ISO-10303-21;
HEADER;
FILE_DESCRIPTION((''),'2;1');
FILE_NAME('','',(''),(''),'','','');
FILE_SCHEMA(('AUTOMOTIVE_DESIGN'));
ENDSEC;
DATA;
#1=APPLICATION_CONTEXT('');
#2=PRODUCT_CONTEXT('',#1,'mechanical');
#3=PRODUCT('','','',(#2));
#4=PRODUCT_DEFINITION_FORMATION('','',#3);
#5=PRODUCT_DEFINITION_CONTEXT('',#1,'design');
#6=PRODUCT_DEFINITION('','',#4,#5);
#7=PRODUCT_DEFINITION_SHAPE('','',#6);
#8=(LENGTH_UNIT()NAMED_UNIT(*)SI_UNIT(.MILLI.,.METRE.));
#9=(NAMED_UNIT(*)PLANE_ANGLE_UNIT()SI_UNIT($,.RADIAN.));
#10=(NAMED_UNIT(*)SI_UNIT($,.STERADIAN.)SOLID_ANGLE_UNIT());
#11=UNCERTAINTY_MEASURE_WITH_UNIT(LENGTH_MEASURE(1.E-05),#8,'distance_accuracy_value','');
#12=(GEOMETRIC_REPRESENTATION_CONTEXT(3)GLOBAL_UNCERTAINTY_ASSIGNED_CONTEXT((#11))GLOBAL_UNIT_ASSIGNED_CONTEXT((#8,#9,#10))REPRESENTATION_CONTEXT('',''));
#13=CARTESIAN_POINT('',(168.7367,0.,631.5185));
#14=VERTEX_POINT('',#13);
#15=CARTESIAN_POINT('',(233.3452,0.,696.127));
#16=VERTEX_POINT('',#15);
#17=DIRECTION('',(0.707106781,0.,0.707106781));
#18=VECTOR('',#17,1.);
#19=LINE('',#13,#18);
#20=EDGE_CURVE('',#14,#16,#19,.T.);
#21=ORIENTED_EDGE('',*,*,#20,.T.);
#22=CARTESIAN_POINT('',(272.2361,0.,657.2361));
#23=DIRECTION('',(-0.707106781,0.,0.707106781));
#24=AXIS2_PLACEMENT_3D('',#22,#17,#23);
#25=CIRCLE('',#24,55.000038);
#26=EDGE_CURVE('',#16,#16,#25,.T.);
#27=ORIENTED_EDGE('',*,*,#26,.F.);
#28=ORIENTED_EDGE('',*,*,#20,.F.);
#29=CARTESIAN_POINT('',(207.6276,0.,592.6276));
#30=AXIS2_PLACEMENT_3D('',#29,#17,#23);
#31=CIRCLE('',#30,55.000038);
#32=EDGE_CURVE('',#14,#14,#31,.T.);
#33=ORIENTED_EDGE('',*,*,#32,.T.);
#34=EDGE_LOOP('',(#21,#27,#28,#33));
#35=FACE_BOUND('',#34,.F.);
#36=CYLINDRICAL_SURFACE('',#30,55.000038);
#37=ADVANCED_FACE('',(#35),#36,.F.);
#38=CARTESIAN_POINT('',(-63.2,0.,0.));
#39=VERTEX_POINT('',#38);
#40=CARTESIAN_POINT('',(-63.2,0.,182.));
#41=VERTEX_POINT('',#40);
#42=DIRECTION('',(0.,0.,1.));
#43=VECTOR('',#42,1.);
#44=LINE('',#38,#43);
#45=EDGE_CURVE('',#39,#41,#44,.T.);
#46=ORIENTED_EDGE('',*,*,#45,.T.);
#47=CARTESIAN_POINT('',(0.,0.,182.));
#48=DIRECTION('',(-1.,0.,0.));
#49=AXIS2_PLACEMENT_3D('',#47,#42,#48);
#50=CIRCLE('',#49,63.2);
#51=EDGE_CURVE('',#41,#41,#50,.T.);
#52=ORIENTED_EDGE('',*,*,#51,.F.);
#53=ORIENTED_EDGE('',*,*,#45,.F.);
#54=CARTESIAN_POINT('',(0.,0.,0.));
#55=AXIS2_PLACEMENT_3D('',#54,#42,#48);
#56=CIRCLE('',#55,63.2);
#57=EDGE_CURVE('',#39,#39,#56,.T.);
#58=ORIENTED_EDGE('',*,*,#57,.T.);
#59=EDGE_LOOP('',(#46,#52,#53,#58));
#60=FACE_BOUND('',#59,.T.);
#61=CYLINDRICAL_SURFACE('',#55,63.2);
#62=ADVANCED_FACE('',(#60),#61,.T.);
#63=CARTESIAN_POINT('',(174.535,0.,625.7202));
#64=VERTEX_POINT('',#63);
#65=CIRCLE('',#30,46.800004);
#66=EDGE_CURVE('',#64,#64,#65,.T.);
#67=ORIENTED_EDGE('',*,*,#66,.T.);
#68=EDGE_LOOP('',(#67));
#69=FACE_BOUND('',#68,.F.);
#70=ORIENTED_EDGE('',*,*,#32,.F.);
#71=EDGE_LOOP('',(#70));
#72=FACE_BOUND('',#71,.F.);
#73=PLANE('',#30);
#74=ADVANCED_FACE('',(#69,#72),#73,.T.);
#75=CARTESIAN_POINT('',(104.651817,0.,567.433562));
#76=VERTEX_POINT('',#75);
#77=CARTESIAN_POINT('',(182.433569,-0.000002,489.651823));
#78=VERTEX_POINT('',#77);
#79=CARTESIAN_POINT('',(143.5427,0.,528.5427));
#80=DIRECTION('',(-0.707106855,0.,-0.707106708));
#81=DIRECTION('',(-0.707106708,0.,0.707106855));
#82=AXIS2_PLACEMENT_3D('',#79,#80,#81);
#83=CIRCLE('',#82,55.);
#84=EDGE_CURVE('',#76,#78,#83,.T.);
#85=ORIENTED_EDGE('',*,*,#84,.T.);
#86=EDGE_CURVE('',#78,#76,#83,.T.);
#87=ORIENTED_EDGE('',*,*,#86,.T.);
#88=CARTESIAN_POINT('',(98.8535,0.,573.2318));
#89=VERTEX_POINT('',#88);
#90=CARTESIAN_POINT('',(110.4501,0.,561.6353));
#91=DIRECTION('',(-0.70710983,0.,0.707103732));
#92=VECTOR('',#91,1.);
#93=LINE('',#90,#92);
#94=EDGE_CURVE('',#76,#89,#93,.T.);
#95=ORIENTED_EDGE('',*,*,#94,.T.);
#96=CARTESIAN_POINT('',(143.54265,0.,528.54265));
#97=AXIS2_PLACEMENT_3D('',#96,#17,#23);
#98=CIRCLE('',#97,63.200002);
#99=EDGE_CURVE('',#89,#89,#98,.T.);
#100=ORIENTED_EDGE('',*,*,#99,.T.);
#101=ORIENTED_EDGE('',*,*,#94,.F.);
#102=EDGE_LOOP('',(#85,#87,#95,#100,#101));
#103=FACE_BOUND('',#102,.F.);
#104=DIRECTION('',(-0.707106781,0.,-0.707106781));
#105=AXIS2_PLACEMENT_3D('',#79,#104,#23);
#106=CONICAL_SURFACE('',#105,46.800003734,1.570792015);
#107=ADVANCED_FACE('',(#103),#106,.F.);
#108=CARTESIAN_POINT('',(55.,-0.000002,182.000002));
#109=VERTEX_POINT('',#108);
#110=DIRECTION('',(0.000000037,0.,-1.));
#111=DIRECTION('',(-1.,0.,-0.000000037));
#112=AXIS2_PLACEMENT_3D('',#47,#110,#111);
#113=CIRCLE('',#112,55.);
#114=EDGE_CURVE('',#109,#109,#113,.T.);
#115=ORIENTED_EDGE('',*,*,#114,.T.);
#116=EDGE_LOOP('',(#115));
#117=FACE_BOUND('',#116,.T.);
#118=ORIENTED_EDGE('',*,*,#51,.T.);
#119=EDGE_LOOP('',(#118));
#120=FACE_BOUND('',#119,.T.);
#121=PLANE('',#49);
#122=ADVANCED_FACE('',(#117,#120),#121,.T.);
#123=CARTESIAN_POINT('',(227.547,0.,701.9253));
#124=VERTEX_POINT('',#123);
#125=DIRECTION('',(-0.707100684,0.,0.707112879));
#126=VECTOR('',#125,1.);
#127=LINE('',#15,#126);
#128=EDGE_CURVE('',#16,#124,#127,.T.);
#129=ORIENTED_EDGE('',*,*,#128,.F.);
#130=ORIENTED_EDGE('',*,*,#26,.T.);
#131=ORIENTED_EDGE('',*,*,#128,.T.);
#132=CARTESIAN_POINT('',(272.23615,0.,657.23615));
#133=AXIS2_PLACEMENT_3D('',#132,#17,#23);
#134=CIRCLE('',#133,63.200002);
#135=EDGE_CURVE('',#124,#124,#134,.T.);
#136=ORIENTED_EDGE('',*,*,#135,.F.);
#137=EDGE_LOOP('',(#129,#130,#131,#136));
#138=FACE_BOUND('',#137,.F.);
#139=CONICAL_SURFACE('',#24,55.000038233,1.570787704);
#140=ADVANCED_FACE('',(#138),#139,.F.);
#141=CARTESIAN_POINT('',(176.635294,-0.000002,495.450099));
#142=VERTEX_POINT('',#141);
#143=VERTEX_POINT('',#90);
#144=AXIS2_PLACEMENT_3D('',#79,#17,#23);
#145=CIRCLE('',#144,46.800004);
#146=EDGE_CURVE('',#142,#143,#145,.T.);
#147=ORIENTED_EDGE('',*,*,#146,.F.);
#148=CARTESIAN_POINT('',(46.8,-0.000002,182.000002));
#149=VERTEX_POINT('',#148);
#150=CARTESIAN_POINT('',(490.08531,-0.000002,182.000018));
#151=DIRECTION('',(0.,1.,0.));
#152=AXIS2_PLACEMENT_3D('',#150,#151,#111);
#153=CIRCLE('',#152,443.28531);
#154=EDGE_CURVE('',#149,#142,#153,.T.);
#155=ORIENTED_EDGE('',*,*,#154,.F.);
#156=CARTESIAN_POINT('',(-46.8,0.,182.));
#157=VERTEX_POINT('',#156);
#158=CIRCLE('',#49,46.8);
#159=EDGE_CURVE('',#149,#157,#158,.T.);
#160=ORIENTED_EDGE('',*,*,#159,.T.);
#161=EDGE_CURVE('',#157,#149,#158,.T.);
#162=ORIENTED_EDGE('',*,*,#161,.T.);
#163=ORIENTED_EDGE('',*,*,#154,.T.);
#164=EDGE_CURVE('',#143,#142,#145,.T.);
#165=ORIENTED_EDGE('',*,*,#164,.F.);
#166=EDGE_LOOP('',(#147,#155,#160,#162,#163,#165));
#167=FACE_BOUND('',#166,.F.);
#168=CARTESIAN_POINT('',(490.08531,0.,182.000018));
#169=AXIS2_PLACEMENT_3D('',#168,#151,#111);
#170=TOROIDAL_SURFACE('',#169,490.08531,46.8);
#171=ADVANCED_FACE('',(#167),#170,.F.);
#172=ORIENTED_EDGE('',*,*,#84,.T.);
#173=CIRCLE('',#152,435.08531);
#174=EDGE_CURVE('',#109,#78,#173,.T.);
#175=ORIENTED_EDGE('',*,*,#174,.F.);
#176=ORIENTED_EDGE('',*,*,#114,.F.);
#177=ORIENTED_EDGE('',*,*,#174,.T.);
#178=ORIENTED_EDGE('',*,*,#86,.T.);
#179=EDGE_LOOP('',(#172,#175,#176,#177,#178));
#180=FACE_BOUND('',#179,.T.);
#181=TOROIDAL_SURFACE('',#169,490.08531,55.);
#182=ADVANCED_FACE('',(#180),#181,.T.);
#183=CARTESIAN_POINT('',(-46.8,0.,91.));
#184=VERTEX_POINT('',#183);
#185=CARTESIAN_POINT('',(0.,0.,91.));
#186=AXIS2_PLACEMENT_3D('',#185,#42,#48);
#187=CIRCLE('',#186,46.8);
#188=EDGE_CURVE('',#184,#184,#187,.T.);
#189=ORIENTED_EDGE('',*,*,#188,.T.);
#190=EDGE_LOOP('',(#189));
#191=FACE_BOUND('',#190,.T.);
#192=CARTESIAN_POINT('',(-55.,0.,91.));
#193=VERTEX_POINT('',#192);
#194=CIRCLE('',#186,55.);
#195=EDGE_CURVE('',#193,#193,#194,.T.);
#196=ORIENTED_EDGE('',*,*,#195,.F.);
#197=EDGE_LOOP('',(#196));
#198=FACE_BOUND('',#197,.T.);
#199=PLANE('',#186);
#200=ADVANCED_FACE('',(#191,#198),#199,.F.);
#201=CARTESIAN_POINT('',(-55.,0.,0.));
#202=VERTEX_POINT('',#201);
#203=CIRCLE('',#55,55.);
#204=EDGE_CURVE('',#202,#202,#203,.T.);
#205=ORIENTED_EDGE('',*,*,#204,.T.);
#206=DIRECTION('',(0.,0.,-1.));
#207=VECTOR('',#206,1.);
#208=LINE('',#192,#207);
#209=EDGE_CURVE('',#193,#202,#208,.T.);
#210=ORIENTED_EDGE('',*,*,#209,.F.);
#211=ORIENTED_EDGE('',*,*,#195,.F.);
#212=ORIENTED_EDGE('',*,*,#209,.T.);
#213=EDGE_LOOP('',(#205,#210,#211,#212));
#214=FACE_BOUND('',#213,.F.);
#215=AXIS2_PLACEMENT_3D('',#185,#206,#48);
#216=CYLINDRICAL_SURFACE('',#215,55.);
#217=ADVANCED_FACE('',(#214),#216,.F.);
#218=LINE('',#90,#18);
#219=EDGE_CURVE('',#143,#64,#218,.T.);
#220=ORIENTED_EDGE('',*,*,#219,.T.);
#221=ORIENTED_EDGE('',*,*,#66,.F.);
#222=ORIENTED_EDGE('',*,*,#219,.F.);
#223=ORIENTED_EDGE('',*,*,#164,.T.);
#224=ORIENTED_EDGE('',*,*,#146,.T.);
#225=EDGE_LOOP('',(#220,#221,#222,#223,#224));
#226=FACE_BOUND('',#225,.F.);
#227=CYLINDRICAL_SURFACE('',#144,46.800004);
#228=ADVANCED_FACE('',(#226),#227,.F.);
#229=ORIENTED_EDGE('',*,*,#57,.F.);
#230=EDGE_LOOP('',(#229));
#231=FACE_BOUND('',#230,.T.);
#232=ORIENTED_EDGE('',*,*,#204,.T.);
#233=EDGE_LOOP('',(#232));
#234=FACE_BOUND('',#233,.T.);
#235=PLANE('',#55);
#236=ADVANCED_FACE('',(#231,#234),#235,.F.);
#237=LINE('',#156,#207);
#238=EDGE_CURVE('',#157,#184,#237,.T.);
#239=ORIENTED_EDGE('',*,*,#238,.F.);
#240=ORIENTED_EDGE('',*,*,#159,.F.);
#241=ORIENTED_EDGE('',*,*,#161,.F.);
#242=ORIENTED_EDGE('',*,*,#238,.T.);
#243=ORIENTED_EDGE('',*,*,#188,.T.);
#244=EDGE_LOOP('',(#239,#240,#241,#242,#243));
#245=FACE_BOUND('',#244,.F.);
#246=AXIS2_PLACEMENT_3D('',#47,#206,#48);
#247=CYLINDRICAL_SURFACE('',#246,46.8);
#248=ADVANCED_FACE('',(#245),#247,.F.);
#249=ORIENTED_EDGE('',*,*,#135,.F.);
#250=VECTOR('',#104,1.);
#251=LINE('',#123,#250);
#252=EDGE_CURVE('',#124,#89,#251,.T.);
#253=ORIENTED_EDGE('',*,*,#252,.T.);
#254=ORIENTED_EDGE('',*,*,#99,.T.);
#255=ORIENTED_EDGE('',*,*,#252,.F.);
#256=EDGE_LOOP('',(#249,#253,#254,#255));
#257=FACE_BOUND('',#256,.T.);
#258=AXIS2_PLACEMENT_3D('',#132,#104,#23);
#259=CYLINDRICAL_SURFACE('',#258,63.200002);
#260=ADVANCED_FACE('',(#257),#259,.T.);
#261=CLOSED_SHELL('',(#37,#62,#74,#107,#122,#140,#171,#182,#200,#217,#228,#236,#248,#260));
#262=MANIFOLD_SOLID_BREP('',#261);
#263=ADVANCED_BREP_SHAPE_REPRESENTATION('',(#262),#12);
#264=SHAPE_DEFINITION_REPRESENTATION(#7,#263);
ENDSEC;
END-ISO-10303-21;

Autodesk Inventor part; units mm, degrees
ref_plane "YZ Plane" through (0, 0, 0) normal (1, 0, 0) x (0, 1, 0)
ref_plane "XZ Plane" through (0, 0, 0) normal (0, 1, 0) x (-1, 0, 0)
ref_plane "XY Plane" through (0, 0, 0) normal (0, 0, 1) x (1, 0, 0)
sketch "Sketch1" plane through (0, 0, 0) normal (0, 1, 0) x (-1, 0, 0)
  line L0 (0, 0) -> (0, 182) construction
  line L1 (0, 182) -> (46.8, 182) construction
  line L2 (46.8, 182) -> (46.8, 91)
  line L3 (46.8, 91) -> (55, 91)
  line L4 (55, 91) -> (55, 0)
  line L5 (55, 0) -> (63.2, 0)
  line L6 (63.2, 0) -> (63.2, 182)
  line L7 (63.2, 182) -> (46.8, 182)
  line L8 (55, 0) -> (0, 0) construction
  line L9 (0, 182) -> (0, 385) construction
  line L10 (0, 385) -> (-143.5427, 528.5427) construction
  line L11 (-143.5427, 528.5427) -> (-110.4501, 561.6353) construction
  line L12 (-110.4501, 561.6353) -> (-174.535, 625.7202)
  line L13 (-174.535, 625.7202) -> (-168.7367, 631.5185)
  line L14 (-168.7367, 631.5185) -> (-233.3452, 696.127)
  line L15 (-233.3452, 696.127) -> (-227.547, 701.9253)
  line L16 (-227.547, 701.9253) -> (-98.8535, 573.2318)
  line L17 (-110.4501, 561.6353) -> (-98.8535, 573.2318)
  line L18 (-143.5427, 528.5427) -> (-272.2361, 657.2361) construction
  line L19 (-233.3452, 696.127) -> (-272.2361, 657.2361) construction
  line L20 (0, 182) -> (-490.0854, 182) construction
  line L21 (-143.5427, 528.5427) -> (-490.0854, 182) construction
  arc A0 (0, 182) -> (-143.5427, 528.5427) centre (-490.0854, 182) ccw
  line L22 (-143.5427, 528.5427) -> (-143.5427, 182) construction
  line L23 (46.8, 91) -> (0, 91) construction
  line L24 (-174.535, 625.7202) -> (-207.6276, 592.6276) construction
  dimension "d0" = 182
  dimension "d1" = 91
  dimension "d2" = 93.6
  dimension "d3" = 110
  dimension "d4" = 126.4
  dimension "d5" = 203
  dimension "d6" = 203
  dimension "d7" = 182
  dimension "d8" = 91
  dimension "d9" = 93.6
  dimension "d10" = 110
  dimension "d11" = 126.4
  dimension "d12" = 45
revolve "Revolve1" add sketch "Sketch1" angle 360 about axis through (0, 0, 0) along (0, 0, 1) contours L7 L6 L5 L4 L3 L2
revolve "Revolve2" add sketch "Sketch1" angle 360 about axis through (143.5427, 0, 528.5427) along (0.7071068, 0, 0.7071068) contours L12 L13 L14 L15 L16 L17
sketch "Sketch2" plane through (0, 0, 182) normal (0, 0, 1) x (1, 0, 0)
  circle A0 centre (0, 0) radius 46.8 projected
  circle A1 centre (0, 0) radius 55 projected
sweep "Sweep1" add profiles "Sketch2" path "Sketch1" path curves A0
equation "\"d0\" = 2 * tk"
equation "\"d1\" = tk"
equation "\"d2\" = d - 2 * s1"
equation "\"d3\" = d"
equation "\"d4\" = d + 2 * s1"
equation "\"d5\" = zk"
equation "\"d6\" = zk"
equation "\"d7\" = 2 * tk"
equation "\"d8\" = tk"
equation "\"d9\" = d - 2 * s1"
equation "\"d10\" = d"
equation "\"d11\" = d + 2 * s1"
equation "\"zk\" = 203"
equation "\"tk\" = 91"
equation "\"d\" = 110"
equation "\"s1\" = 8.2"
properties part number "DIN 8063 Двойная подвижная соединительная муфта с изгибом 45 градусов со стыковой сваркой - MMK - KK 110 - 5" material "ПВХ, непластифицированный"
